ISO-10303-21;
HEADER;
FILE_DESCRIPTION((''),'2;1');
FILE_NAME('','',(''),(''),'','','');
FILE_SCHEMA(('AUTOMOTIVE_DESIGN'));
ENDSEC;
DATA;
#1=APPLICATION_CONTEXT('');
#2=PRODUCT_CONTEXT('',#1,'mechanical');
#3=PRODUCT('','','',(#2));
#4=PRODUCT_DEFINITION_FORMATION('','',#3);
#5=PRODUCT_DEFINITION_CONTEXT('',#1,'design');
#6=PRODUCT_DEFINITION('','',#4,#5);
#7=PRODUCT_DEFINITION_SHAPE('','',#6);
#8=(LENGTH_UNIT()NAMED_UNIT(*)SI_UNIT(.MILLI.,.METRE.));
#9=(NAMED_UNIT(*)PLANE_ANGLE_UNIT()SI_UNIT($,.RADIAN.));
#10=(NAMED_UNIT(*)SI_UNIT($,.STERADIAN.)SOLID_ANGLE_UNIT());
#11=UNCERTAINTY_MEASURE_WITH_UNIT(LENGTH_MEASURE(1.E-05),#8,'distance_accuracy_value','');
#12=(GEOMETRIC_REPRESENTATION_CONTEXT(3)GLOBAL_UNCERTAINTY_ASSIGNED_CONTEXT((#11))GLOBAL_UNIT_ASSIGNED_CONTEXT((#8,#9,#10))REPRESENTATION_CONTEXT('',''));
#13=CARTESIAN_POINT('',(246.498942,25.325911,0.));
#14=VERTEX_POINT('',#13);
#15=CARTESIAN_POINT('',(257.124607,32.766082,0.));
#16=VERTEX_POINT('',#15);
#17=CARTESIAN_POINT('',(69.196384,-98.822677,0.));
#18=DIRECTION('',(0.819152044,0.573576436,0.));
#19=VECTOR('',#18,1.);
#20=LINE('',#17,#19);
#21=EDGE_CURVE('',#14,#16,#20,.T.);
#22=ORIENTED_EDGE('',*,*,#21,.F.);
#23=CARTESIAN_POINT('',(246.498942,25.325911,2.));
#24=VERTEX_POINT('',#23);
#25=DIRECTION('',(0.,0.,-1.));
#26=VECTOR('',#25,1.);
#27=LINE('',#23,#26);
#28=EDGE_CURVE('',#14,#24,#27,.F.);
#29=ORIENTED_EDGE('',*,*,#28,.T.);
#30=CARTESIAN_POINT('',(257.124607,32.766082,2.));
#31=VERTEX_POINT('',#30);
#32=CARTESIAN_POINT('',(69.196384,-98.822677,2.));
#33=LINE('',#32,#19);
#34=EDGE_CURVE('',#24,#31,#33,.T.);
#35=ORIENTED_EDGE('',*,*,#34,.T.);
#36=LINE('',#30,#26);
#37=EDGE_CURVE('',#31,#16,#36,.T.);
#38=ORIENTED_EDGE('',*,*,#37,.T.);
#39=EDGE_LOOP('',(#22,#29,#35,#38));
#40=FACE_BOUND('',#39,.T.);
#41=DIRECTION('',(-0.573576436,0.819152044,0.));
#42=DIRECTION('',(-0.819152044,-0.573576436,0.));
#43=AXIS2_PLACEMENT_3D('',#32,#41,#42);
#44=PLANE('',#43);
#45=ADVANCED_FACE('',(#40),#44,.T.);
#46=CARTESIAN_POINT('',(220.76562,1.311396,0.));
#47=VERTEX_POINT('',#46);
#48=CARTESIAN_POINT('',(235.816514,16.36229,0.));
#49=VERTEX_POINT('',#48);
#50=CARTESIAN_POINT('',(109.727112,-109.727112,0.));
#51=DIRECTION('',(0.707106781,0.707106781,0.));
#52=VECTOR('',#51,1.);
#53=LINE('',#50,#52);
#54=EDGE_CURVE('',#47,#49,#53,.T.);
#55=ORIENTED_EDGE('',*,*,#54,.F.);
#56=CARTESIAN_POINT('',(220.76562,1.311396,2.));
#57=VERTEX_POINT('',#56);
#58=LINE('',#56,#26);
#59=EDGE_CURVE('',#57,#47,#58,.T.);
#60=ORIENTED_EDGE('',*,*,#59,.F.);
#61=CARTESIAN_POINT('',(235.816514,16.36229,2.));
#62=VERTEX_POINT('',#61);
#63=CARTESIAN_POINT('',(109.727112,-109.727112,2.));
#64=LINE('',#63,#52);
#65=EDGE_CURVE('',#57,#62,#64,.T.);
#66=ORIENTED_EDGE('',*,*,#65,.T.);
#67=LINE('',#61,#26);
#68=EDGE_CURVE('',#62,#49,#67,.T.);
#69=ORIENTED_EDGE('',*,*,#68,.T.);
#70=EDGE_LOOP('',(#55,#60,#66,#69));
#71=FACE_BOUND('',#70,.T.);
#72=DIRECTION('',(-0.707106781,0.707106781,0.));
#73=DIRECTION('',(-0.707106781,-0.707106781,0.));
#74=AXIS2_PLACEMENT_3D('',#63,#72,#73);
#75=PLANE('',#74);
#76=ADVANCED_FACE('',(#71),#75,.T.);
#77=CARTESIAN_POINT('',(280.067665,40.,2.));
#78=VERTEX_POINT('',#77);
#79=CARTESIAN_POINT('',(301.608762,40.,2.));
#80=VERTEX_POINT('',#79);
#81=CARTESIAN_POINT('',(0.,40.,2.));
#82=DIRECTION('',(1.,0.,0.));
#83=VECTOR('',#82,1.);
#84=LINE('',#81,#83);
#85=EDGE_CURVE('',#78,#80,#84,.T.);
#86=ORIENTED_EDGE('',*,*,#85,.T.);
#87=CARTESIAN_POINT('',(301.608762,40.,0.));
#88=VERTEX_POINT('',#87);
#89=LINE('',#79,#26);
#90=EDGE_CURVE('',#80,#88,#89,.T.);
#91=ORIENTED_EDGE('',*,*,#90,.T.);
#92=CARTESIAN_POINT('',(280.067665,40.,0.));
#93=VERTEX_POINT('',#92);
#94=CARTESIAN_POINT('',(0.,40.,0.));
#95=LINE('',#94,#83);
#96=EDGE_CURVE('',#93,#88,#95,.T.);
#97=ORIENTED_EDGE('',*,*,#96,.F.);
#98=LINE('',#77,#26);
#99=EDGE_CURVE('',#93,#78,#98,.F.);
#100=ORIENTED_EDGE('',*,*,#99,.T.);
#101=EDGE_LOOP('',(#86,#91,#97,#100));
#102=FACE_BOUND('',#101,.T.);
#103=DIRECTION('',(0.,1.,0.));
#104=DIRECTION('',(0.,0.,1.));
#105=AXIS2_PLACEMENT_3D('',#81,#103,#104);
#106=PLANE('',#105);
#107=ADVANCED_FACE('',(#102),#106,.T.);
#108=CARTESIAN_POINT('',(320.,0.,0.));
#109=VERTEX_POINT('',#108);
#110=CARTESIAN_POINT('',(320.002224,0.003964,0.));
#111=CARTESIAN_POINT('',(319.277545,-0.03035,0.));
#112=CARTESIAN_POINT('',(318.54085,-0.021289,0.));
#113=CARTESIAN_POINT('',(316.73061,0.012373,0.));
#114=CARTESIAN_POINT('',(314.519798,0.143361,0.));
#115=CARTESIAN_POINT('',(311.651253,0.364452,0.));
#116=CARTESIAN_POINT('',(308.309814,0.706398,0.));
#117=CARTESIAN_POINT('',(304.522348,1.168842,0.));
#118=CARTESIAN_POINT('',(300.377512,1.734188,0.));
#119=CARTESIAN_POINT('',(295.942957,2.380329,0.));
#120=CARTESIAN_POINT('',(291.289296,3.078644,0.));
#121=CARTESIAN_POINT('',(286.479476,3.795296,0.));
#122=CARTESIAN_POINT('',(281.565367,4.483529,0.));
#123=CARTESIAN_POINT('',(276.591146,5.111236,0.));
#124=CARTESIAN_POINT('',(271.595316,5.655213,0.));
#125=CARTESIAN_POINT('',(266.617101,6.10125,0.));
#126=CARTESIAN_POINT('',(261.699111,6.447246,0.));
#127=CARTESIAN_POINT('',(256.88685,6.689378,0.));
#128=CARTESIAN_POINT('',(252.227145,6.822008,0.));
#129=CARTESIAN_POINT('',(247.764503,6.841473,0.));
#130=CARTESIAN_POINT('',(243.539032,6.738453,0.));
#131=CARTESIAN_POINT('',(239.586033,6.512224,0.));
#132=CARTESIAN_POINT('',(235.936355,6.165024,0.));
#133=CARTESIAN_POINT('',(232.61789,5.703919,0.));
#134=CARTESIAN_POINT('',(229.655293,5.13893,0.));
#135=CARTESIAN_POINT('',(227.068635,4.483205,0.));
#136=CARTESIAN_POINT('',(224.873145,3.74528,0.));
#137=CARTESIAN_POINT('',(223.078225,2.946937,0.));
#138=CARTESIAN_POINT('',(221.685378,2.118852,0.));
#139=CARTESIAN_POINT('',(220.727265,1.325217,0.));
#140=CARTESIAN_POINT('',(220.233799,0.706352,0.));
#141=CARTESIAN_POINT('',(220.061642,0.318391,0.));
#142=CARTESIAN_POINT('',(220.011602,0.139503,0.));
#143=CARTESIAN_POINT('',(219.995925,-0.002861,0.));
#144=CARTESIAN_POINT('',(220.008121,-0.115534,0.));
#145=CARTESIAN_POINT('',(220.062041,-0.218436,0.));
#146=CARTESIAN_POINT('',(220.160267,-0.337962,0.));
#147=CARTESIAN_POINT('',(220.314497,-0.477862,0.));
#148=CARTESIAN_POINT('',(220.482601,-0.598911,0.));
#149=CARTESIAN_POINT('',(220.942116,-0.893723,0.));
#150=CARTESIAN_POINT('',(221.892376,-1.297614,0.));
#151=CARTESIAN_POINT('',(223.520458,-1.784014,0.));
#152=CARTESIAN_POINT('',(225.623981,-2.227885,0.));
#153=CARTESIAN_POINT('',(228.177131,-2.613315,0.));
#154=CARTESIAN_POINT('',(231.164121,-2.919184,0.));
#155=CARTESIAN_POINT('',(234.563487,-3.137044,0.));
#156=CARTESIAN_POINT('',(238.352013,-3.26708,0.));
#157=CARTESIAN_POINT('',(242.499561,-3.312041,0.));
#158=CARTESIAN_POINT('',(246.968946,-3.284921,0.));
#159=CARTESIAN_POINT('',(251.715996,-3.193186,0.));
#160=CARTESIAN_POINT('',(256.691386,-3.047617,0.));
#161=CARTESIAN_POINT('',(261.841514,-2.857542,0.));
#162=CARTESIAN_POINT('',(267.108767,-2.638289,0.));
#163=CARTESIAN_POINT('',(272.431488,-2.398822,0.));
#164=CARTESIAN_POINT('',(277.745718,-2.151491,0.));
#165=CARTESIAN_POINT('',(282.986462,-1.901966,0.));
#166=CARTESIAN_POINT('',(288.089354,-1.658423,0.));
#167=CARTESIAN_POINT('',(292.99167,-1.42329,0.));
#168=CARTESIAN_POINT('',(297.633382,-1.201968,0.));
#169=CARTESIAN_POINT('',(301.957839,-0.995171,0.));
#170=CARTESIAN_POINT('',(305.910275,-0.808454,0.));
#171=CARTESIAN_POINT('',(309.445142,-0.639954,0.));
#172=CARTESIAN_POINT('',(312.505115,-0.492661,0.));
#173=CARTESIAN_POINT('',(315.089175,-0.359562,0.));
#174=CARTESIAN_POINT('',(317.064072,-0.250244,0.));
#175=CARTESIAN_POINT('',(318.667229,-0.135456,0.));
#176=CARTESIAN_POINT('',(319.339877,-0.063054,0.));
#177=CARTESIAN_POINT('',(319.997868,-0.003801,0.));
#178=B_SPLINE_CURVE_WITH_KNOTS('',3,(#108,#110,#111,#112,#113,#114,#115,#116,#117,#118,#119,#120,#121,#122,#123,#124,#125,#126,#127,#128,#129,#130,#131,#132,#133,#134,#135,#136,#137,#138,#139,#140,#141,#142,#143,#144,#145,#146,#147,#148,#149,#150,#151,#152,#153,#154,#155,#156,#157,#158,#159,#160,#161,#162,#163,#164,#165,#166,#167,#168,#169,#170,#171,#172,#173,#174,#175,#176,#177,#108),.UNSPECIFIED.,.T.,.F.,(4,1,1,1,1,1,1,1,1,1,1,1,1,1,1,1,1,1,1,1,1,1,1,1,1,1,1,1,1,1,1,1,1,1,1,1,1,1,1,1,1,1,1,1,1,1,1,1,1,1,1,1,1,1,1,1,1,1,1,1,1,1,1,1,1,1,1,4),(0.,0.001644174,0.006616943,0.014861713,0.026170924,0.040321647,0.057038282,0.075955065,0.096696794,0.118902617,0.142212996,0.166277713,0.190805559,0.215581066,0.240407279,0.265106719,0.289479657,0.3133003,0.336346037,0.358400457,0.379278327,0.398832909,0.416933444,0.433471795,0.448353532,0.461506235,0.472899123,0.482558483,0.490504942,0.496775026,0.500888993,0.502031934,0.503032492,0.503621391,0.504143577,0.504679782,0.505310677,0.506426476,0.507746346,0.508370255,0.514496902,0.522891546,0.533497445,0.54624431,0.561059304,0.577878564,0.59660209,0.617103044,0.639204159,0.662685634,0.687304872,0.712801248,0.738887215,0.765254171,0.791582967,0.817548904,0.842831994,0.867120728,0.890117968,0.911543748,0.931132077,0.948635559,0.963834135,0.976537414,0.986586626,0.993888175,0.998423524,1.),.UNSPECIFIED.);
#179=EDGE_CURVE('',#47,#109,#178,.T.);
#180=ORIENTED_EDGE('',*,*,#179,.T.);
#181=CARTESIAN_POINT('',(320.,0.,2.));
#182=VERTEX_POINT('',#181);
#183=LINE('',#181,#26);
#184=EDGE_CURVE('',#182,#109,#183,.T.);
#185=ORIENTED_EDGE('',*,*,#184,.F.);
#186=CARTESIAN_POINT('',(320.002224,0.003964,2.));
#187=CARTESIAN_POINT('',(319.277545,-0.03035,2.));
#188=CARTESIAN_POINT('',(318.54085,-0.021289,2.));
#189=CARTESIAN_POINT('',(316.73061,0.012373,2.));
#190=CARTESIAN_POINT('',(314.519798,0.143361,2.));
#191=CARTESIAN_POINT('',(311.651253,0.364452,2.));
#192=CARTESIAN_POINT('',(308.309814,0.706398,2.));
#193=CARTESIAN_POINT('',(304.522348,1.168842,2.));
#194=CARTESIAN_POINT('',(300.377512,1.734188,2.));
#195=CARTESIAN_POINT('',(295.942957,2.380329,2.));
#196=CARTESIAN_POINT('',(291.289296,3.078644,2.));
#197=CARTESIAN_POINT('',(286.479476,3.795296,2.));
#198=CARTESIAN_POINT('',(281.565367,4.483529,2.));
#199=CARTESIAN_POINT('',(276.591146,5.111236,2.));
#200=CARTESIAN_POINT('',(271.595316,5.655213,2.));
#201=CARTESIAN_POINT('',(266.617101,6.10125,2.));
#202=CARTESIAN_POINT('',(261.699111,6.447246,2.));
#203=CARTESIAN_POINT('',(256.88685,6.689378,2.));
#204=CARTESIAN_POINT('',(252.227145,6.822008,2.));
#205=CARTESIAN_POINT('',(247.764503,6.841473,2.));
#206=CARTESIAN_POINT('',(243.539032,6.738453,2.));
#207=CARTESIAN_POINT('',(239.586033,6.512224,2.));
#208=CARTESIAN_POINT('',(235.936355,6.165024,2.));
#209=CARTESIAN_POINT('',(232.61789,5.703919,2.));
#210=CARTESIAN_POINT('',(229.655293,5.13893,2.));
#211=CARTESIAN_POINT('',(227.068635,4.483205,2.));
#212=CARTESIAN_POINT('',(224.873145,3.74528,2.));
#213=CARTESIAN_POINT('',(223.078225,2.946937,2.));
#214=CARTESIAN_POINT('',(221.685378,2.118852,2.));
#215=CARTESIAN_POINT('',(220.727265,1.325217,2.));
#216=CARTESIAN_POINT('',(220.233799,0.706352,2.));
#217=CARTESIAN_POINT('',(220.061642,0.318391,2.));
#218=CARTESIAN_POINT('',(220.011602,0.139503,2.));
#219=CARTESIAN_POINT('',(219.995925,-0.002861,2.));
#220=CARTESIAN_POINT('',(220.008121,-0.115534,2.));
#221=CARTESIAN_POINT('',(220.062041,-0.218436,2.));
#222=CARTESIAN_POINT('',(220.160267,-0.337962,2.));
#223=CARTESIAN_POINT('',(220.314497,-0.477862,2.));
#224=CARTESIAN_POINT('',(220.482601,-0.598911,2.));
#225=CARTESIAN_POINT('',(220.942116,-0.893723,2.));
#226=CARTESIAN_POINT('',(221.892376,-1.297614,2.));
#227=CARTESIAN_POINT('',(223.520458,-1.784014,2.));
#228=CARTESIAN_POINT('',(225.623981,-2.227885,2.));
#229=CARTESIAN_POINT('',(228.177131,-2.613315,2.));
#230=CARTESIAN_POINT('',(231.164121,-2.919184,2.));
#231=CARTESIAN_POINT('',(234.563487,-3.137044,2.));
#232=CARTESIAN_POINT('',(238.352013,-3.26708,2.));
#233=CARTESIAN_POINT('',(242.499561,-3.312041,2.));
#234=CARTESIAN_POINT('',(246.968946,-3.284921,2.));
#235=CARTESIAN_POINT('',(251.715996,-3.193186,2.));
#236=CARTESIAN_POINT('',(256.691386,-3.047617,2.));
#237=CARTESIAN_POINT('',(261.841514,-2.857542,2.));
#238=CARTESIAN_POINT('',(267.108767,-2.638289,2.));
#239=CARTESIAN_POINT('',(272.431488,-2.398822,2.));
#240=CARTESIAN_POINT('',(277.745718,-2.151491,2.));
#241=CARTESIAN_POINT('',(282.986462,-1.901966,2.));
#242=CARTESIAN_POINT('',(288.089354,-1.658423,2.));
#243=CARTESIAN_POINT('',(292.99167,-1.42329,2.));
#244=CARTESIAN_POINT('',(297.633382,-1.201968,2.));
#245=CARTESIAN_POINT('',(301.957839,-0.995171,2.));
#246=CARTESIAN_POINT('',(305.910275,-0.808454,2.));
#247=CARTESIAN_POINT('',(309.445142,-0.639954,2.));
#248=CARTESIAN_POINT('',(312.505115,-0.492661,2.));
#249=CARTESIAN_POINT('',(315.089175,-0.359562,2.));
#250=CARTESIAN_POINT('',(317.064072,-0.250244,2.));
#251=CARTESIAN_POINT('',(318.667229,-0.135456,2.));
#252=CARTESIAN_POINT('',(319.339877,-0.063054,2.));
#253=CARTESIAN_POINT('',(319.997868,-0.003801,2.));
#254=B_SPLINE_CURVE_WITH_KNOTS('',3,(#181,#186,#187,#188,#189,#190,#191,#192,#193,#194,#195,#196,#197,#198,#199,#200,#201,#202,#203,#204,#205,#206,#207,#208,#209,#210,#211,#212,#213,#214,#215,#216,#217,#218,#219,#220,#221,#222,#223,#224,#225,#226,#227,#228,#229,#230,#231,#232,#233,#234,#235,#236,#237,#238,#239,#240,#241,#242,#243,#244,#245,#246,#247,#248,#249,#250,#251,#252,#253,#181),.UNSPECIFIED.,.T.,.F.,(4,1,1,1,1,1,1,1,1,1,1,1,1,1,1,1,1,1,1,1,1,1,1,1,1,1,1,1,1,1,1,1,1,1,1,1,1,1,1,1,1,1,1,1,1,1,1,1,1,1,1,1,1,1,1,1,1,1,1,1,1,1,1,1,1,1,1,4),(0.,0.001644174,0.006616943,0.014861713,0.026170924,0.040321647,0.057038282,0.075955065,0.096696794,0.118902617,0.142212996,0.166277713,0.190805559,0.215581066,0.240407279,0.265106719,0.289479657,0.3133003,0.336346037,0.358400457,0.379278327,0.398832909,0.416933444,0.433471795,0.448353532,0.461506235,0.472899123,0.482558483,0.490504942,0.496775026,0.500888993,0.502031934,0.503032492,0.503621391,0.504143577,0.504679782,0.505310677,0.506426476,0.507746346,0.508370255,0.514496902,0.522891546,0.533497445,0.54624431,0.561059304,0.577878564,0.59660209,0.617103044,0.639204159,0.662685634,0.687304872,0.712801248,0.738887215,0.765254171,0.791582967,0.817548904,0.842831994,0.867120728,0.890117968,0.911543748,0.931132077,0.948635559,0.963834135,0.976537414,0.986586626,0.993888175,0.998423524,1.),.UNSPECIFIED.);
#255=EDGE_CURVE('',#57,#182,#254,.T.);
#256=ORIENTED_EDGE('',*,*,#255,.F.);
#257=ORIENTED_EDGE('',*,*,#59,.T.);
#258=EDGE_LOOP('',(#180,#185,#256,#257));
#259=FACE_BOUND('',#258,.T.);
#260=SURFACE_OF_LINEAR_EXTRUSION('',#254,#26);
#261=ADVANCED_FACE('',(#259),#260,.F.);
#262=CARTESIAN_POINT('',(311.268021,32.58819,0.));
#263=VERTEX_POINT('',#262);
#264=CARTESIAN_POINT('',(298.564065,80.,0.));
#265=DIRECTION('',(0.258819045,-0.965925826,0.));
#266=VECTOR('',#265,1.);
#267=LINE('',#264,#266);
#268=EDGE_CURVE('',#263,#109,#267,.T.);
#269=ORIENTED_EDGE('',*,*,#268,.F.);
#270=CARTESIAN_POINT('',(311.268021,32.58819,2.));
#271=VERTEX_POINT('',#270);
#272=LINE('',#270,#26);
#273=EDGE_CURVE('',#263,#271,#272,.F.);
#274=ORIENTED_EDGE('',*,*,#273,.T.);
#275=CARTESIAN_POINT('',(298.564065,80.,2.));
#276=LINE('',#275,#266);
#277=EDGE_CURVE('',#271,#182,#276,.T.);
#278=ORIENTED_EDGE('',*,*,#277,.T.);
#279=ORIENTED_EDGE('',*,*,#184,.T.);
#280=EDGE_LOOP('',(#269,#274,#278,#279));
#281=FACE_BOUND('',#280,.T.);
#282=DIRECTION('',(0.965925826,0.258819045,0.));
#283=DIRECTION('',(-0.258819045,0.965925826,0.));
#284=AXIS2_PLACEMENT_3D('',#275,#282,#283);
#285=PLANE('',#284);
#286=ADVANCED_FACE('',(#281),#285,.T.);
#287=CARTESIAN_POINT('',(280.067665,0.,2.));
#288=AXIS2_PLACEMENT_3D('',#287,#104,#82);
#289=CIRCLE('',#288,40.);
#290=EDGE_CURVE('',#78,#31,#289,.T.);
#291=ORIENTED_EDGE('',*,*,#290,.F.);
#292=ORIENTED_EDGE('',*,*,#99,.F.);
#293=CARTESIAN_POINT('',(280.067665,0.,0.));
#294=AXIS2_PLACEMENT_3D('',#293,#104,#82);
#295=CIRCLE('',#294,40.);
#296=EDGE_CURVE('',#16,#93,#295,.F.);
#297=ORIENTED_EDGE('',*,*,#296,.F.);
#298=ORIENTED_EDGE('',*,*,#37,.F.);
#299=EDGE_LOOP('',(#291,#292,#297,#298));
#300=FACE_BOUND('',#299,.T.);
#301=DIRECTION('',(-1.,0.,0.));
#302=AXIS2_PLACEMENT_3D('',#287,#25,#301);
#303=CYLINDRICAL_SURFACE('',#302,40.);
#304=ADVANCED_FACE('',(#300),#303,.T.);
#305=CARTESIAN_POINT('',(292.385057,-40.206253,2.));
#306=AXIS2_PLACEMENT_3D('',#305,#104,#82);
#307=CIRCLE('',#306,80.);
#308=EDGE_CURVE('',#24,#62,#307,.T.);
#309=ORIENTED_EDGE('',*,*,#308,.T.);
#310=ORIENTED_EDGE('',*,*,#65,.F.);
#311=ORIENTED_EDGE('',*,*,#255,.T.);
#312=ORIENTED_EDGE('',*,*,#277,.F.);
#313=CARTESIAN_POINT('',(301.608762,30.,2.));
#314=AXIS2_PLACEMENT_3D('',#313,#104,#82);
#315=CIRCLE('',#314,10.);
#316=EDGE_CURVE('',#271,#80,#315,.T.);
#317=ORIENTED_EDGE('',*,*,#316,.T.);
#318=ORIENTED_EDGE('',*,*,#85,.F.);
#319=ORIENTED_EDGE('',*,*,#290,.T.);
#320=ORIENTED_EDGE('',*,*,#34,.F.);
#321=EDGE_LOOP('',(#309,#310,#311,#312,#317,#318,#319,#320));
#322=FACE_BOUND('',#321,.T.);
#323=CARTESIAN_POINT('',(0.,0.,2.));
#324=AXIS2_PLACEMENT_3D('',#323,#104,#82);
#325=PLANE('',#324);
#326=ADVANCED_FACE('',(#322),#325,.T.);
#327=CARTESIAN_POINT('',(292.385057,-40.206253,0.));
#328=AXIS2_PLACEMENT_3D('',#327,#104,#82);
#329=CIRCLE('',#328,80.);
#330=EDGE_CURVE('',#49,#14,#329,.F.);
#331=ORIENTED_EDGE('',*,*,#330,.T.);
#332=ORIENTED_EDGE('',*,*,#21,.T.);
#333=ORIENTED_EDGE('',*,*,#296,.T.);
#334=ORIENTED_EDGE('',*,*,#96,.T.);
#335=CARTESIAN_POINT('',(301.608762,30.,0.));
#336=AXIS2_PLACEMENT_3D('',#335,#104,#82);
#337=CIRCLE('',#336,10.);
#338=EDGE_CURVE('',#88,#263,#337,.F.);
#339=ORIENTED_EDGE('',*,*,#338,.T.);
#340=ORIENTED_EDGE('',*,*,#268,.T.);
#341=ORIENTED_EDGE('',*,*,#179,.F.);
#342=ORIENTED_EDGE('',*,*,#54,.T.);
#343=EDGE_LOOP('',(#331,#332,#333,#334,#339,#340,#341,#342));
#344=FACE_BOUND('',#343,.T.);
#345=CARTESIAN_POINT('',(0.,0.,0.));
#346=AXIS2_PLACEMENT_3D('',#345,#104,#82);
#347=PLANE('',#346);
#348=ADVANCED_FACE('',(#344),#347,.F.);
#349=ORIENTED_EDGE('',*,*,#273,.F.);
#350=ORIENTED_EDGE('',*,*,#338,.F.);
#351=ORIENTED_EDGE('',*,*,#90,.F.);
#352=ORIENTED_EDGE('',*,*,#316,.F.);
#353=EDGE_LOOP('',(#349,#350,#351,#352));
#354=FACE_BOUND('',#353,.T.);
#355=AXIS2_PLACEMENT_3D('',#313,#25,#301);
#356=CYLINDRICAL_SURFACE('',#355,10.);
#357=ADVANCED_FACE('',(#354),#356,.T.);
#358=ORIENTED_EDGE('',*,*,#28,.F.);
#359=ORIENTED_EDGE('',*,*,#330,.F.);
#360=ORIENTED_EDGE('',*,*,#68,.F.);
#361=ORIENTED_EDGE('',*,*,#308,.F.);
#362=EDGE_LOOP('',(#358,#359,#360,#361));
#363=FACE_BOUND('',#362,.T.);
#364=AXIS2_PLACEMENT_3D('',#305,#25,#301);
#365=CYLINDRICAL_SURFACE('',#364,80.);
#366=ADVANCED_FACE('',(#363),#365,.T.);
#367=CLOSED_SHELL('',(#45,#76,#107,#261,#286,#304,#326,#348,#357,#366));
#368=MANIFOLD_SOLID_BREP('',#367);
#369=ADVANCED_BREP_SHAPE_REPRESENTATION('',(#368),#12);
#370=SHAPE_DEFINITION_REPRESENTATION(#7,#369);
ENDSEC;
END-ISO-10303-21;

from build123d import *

# Parameters (mm, degrees)
BOSS_EXTRUDE1_DEPTH = 2
FILLET2_R           = 10
FILLET3_R           = 40
FILLET4_R           = 80


# Read off the part's stored shape, not the designer's step: Boss-Extrude1
with BuildPart() as part:
    # Boss-Extrude1 outline → Boss-Extrude1 (new body)
    with BuildSketch(Plane.XY):
        with BuildLine():
            Line((267.455713264, 40), (240.765620284, 21.3113957))
            Line((240.765620284, 21.3113957), (220.765620284, 1.3113957))
            add(Edge.make_bspline(
                [(220.765620284, 1.3113957), (220.72663316, 1.272408575), (220.493626624, 1.032206135), (220.23379921, 0.706351654), (220.061642382, 0.318391358), (220.011602189, 0.139502643), (219.995925197, -0.002861211), (220.008120727, -0.115534154), (220.062041002, -0.21843611), (220.160266844, -0.337962224), (220.314496952, -0.477861912), (220.482600839, -0.598911233), (220.942116034, -0.893723302), (221.892375739, -1.29761444), (223.520457756, -1.784013523), (225.623980896, -2.227885385), (228.177131144, -2.613315253), (231.164121123, -2.919183773), (234.563486569, -3.13704422), (238.352012883, -3.267079886), (242.499561211, -3.312040739), (246.9689457, -3.284920505), (251.715996006, -3.193186176), (256.691386013, -3.047617228), (261.841513678, -2.857541871), (267.108766757, -2.638288597), (272.431487903, -2.398822278), (277.745717707, -2.151491009), (282.986461691, -1.901966392), (288.089354259, -1.658423301), (292.991669653, -1.423290263), (297.633381787, -1.201968071), (301.957838568, -0.995171113), (305.91027468, -0.808454245), (309.445141673, -0.639954363), (312.505114519, -0.492661458), (315.08917453, -0.359561985), (317.064072102, -0.250243866), (318.667228537, -0.135455891), (319.33987673, -0.063054382), (319.997867718, -0.003800804), (320, 0)],
                knots=[0.495962564, 0.495962564, 0.495962564, 0.495962564, 0.496775026, 0.500888993, 0.502031934, 0.503032492, 0.503621391, 0.504143577, 0.504679782, 0.505310677, 0.506426476, 0.507746346, 0.508370255, 0.514496902, 0.522891546, 0.533497445, 0.54624431, 0.561059304, 0.577878564, 0.59660209, 0.617103044, 0.639204159, 0.662685634, 0.687304872, 0.712801248, 0.738887215, 0.765254171, 0.791582967, 0.817548904, 0.842831994, 0.867120728, 0.890117968, 0.911543748, 0.931132077, 0.948635559, 0.963834135, 0.976537414, 0.986586626, 0.993888175, 0.998423524, 1, 1, 1, 1], degree=3))
            Line((320, 0), (309.282032303, 40))
            Line((309.282032303, 40), (267.455713264, 40))
        make_face()
    extrude(amount=BOSS_EXTRUDE1_DEPTH)

    # Fillet2
    fillet2_edges = [part.edges().sort_by_distance(p)[0] for p in [
        (309.282032303, 40, 1),
    ]]
    fillet(fillet2_edges, radius=FILLET2_R)

    # Fillet3
    fillet3_edges = [part.edges().sort_by_distance(p)[0] for p in [
        (267.455713264, 40, 1),
    ]]
    fillet(fillet3_edges, radius=FILLET3_R)

    # Fillet4
    fillet4_edges = [part.edges().sort_by_distance(p)[0] for p in [
        (240.765620284, 21.3113957, 1),
    ]]
    fillet(fillet4_edges, radius=FILLET4_R)


solid = part.part
